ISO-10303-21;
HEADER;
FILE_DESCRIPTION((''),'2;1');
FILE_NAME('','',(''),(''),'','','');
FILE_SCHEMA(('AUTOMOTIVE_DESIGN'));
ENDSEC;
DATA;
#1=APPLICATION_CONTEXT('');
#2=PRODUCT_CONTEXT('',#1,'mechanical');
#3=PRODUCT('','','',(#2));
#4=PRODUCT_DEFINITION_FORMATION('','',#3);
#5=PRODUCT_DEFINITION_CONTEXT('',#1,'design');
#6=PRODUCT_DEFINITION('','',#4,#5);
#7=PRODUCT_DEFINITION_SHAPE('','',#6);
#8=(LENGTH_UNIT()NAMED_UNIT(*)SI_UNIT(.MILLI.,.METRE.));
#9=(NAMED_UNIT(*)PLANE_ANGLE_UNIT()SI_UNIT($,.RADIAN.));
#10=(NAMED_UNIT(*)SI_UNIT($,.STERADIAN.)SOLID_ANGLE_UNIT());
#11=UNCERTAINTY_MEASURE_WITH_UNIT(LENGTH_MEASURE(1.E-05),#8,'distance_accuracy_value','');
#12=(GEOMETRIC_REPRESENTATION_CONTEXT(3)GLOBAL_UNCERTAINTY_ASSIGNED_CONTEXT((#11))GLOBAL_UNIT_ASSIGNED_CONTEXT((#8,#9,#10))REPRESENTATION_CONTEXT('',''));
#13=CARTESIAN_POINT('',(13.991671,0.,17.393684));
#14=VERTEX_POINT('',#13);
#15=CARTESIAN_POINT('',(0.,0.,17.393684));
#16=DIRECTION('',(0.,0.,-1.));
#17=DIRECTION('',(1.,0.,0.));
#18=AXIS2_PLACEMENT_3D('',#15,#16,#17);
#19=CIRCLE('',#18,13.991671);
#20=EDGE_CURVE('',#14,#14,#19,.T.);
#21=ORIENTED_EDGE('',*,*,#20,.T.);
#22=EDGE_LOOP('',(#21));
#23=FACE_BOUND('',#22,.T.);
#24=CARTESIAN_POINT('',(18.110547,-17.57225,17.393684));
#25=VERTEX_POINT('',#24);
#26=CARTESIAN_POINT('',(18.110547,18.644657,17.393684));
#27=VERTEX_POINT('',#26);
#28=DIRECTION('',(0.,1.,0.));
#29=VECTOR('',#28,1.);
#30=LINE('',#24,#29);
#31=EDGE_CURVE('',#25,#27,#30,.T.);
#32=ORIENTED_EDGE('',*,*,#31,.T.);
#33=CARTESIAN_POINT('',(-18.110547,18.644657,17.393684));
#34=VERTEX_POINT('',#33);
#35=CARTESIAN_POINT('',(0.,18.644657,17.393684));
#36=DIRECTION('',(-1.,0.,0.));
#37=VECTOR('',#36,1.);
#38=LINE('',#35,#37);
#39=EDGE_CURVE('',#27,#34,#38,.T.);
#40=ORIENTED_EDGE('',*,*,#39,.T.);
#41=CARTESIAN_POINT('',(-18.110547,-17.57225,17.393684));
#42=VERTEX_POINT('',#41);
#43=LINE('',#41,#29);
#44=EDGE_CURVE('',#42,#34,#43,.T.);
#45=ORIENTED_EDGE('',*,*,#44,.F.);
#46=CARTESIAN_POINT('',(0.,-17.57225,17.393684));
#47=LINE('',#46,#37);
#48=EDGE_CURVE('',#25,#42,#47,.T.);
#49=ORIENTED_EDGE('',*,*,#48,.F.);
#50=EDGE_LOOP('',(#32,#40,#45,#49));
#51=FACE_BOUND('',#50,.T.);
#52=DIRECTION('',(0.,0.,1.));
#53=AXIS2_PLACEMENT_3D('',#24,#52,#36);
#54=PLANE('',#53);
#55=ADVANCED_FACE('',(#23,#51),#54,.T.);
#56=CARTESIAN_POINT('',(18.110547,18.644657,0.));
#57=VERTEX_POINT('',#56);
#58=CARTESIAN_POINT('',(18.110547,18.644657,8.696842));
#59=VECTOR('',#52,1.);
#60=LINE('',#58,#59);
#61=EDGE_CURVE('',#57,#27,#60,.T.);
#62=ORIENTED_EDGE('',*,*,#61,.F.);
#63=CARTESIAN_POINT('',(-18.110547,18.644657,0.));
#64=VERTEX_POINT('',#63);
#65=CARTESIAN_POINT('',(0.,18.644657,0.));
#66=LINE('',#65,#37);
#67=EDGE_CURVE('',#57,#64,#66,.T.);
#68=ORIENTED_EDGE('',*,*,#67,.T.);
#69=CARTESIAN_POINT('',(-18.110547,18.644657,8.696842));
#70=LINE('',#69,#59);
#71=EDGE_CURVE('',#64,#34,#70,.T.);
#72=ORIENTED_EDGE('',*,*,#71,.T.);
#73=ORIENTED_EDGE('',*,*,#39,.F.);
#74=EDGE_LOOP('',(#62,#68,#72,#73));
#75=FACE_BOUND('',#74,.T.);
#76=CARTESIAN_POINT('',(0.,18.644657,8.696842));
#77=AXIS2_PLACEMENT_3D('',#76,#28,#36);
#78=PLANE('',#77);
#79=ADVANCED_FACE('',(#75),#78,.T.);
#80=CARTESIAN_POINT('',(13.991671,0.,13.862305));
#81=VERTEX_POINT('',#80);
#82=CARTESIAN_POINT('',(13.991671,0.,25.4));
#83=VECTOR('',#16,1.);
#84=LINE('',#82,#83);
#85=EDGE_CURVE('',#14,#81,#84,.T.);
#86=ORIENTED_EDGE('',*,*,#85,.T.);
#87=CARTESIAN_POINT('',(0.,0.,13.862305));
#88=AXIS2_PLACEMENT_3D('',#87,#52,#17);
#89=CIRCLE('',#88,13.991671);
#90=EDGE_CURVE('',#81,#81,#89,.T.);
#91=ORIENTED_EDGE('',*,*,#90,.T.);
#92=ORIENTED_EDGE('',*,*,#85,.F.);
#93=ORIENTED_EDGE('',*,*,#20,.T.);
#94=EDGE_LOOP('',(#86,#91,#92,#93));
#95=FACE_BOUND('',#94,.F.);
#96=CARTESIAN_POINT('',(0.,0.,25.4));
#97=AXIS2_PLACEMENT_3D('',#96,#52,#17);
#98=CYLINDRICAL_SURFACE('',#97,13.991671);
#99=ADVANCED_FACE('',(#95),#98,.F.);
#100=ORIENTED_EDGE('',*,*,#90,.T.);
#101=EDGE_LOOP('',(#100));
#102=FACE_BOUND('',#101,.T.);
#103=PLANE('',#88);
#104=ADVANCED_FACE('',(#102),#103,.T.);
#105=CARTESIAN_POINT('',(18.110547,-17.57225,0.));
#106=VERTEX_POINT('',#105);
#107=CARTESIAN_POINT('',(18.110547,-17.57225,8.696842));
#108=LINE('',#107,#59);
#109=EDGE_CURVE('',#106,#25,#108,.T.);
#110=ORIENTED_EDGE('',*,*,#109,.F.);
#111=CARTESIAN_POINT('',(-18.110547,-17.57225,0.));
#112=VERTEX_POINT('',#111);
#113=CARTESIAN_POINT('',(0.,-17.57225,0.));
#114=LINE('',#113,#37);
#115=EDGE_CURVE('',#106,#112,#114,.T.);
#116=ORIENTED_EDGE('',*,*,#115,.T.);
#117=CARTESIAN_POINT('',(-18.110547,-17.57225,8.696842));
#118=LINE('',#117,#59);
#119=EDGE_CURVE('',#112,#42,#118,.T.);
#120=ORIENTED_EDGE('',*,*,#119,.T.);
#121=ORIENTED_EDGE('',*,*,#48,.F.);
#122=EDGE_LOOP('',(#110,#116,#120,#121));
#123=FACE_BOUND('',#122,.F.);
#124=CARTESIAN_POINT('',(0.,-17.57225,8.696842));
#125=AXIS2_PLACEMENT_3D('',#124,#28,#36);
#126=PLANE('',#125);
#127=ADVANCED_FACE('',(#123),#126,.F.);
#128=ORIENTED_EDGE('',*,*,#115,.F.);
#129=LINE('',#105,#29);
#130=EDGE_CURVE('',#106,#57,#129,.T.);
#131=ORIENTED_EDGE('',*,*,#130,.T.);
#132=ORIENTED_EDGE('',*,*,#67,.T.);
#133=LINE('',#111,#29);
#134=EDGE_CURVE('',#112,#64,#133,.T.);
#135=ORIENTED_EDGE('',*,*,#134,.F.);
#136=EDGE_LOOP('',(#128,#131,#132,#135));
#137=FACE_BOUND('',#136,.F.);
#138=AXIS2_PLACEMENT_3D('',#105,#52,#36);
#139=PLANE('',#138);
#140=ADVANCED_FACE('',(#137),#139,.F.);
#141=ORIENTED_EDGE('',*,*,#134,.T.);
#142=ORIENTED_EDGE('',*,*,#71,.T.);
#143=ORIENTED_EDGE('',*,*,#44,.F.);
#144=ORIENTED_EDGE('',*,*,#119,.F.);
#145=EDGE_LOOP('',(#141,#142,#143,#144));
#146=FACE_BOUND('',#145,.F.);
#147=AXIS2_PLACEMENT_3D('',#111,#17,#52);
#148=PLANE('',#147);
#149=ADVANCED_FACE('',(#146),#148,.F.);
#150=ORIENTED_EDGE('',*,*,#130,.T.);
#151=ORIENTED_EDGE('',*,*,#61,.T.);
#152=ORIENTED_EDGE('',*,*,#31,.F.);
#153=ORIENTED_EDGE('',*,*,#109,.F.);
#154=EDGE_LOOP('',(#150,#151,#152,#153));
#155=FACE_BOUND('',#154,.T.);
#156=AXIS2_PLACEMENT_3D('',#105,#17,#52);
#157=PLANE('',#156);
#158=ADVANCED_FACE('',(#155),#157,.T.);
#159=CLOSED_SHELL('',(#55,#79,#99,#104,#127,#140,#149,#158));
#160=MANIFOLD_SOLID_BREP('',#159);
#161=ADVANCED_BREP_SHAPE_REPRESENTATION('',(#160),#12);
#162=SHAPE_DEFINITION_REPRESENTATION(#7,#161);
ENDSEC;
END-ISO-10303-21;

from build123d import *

# Parameters (mm, degrees)
F1_R     = 13.9916710172
F2_DEPTH = 25.4
F4_W     = 36.2210944295
F4_H     = 17.3936840147
F5_DEPTH = 36.2169072032
F6_DEPTH = 11.5376953036


with BuildPart() as f2:
    # F1 (on face) → F2 (new body)
    with BuildSketch(Plane.XY):
        Circle(F1_R)
    extrude(amount=F2_DEPTH)

    # F4 (on face) → F5 (join)
    with BuildSketch(Plane(origin=(0, -17.5722502172, 0), x_dir=(-1, 0, 0), z_dir=(0, 1, 0))):
        with Locations((0, 8.6968420073)):
            Rectangle(F4_W, F4_H)
    extrude(amount=F5_DEPTH)

    # F6 (cut): a face of the model
    f6_faces = [f2.faces().sort_by_distance(p)[0] for p in [
        (0, 0, 25.4),
    ]]
    extrude(f6_faces, amount=-F6_DEPTH, mode=Mode.SUBTRACT)


solid = f2.part
